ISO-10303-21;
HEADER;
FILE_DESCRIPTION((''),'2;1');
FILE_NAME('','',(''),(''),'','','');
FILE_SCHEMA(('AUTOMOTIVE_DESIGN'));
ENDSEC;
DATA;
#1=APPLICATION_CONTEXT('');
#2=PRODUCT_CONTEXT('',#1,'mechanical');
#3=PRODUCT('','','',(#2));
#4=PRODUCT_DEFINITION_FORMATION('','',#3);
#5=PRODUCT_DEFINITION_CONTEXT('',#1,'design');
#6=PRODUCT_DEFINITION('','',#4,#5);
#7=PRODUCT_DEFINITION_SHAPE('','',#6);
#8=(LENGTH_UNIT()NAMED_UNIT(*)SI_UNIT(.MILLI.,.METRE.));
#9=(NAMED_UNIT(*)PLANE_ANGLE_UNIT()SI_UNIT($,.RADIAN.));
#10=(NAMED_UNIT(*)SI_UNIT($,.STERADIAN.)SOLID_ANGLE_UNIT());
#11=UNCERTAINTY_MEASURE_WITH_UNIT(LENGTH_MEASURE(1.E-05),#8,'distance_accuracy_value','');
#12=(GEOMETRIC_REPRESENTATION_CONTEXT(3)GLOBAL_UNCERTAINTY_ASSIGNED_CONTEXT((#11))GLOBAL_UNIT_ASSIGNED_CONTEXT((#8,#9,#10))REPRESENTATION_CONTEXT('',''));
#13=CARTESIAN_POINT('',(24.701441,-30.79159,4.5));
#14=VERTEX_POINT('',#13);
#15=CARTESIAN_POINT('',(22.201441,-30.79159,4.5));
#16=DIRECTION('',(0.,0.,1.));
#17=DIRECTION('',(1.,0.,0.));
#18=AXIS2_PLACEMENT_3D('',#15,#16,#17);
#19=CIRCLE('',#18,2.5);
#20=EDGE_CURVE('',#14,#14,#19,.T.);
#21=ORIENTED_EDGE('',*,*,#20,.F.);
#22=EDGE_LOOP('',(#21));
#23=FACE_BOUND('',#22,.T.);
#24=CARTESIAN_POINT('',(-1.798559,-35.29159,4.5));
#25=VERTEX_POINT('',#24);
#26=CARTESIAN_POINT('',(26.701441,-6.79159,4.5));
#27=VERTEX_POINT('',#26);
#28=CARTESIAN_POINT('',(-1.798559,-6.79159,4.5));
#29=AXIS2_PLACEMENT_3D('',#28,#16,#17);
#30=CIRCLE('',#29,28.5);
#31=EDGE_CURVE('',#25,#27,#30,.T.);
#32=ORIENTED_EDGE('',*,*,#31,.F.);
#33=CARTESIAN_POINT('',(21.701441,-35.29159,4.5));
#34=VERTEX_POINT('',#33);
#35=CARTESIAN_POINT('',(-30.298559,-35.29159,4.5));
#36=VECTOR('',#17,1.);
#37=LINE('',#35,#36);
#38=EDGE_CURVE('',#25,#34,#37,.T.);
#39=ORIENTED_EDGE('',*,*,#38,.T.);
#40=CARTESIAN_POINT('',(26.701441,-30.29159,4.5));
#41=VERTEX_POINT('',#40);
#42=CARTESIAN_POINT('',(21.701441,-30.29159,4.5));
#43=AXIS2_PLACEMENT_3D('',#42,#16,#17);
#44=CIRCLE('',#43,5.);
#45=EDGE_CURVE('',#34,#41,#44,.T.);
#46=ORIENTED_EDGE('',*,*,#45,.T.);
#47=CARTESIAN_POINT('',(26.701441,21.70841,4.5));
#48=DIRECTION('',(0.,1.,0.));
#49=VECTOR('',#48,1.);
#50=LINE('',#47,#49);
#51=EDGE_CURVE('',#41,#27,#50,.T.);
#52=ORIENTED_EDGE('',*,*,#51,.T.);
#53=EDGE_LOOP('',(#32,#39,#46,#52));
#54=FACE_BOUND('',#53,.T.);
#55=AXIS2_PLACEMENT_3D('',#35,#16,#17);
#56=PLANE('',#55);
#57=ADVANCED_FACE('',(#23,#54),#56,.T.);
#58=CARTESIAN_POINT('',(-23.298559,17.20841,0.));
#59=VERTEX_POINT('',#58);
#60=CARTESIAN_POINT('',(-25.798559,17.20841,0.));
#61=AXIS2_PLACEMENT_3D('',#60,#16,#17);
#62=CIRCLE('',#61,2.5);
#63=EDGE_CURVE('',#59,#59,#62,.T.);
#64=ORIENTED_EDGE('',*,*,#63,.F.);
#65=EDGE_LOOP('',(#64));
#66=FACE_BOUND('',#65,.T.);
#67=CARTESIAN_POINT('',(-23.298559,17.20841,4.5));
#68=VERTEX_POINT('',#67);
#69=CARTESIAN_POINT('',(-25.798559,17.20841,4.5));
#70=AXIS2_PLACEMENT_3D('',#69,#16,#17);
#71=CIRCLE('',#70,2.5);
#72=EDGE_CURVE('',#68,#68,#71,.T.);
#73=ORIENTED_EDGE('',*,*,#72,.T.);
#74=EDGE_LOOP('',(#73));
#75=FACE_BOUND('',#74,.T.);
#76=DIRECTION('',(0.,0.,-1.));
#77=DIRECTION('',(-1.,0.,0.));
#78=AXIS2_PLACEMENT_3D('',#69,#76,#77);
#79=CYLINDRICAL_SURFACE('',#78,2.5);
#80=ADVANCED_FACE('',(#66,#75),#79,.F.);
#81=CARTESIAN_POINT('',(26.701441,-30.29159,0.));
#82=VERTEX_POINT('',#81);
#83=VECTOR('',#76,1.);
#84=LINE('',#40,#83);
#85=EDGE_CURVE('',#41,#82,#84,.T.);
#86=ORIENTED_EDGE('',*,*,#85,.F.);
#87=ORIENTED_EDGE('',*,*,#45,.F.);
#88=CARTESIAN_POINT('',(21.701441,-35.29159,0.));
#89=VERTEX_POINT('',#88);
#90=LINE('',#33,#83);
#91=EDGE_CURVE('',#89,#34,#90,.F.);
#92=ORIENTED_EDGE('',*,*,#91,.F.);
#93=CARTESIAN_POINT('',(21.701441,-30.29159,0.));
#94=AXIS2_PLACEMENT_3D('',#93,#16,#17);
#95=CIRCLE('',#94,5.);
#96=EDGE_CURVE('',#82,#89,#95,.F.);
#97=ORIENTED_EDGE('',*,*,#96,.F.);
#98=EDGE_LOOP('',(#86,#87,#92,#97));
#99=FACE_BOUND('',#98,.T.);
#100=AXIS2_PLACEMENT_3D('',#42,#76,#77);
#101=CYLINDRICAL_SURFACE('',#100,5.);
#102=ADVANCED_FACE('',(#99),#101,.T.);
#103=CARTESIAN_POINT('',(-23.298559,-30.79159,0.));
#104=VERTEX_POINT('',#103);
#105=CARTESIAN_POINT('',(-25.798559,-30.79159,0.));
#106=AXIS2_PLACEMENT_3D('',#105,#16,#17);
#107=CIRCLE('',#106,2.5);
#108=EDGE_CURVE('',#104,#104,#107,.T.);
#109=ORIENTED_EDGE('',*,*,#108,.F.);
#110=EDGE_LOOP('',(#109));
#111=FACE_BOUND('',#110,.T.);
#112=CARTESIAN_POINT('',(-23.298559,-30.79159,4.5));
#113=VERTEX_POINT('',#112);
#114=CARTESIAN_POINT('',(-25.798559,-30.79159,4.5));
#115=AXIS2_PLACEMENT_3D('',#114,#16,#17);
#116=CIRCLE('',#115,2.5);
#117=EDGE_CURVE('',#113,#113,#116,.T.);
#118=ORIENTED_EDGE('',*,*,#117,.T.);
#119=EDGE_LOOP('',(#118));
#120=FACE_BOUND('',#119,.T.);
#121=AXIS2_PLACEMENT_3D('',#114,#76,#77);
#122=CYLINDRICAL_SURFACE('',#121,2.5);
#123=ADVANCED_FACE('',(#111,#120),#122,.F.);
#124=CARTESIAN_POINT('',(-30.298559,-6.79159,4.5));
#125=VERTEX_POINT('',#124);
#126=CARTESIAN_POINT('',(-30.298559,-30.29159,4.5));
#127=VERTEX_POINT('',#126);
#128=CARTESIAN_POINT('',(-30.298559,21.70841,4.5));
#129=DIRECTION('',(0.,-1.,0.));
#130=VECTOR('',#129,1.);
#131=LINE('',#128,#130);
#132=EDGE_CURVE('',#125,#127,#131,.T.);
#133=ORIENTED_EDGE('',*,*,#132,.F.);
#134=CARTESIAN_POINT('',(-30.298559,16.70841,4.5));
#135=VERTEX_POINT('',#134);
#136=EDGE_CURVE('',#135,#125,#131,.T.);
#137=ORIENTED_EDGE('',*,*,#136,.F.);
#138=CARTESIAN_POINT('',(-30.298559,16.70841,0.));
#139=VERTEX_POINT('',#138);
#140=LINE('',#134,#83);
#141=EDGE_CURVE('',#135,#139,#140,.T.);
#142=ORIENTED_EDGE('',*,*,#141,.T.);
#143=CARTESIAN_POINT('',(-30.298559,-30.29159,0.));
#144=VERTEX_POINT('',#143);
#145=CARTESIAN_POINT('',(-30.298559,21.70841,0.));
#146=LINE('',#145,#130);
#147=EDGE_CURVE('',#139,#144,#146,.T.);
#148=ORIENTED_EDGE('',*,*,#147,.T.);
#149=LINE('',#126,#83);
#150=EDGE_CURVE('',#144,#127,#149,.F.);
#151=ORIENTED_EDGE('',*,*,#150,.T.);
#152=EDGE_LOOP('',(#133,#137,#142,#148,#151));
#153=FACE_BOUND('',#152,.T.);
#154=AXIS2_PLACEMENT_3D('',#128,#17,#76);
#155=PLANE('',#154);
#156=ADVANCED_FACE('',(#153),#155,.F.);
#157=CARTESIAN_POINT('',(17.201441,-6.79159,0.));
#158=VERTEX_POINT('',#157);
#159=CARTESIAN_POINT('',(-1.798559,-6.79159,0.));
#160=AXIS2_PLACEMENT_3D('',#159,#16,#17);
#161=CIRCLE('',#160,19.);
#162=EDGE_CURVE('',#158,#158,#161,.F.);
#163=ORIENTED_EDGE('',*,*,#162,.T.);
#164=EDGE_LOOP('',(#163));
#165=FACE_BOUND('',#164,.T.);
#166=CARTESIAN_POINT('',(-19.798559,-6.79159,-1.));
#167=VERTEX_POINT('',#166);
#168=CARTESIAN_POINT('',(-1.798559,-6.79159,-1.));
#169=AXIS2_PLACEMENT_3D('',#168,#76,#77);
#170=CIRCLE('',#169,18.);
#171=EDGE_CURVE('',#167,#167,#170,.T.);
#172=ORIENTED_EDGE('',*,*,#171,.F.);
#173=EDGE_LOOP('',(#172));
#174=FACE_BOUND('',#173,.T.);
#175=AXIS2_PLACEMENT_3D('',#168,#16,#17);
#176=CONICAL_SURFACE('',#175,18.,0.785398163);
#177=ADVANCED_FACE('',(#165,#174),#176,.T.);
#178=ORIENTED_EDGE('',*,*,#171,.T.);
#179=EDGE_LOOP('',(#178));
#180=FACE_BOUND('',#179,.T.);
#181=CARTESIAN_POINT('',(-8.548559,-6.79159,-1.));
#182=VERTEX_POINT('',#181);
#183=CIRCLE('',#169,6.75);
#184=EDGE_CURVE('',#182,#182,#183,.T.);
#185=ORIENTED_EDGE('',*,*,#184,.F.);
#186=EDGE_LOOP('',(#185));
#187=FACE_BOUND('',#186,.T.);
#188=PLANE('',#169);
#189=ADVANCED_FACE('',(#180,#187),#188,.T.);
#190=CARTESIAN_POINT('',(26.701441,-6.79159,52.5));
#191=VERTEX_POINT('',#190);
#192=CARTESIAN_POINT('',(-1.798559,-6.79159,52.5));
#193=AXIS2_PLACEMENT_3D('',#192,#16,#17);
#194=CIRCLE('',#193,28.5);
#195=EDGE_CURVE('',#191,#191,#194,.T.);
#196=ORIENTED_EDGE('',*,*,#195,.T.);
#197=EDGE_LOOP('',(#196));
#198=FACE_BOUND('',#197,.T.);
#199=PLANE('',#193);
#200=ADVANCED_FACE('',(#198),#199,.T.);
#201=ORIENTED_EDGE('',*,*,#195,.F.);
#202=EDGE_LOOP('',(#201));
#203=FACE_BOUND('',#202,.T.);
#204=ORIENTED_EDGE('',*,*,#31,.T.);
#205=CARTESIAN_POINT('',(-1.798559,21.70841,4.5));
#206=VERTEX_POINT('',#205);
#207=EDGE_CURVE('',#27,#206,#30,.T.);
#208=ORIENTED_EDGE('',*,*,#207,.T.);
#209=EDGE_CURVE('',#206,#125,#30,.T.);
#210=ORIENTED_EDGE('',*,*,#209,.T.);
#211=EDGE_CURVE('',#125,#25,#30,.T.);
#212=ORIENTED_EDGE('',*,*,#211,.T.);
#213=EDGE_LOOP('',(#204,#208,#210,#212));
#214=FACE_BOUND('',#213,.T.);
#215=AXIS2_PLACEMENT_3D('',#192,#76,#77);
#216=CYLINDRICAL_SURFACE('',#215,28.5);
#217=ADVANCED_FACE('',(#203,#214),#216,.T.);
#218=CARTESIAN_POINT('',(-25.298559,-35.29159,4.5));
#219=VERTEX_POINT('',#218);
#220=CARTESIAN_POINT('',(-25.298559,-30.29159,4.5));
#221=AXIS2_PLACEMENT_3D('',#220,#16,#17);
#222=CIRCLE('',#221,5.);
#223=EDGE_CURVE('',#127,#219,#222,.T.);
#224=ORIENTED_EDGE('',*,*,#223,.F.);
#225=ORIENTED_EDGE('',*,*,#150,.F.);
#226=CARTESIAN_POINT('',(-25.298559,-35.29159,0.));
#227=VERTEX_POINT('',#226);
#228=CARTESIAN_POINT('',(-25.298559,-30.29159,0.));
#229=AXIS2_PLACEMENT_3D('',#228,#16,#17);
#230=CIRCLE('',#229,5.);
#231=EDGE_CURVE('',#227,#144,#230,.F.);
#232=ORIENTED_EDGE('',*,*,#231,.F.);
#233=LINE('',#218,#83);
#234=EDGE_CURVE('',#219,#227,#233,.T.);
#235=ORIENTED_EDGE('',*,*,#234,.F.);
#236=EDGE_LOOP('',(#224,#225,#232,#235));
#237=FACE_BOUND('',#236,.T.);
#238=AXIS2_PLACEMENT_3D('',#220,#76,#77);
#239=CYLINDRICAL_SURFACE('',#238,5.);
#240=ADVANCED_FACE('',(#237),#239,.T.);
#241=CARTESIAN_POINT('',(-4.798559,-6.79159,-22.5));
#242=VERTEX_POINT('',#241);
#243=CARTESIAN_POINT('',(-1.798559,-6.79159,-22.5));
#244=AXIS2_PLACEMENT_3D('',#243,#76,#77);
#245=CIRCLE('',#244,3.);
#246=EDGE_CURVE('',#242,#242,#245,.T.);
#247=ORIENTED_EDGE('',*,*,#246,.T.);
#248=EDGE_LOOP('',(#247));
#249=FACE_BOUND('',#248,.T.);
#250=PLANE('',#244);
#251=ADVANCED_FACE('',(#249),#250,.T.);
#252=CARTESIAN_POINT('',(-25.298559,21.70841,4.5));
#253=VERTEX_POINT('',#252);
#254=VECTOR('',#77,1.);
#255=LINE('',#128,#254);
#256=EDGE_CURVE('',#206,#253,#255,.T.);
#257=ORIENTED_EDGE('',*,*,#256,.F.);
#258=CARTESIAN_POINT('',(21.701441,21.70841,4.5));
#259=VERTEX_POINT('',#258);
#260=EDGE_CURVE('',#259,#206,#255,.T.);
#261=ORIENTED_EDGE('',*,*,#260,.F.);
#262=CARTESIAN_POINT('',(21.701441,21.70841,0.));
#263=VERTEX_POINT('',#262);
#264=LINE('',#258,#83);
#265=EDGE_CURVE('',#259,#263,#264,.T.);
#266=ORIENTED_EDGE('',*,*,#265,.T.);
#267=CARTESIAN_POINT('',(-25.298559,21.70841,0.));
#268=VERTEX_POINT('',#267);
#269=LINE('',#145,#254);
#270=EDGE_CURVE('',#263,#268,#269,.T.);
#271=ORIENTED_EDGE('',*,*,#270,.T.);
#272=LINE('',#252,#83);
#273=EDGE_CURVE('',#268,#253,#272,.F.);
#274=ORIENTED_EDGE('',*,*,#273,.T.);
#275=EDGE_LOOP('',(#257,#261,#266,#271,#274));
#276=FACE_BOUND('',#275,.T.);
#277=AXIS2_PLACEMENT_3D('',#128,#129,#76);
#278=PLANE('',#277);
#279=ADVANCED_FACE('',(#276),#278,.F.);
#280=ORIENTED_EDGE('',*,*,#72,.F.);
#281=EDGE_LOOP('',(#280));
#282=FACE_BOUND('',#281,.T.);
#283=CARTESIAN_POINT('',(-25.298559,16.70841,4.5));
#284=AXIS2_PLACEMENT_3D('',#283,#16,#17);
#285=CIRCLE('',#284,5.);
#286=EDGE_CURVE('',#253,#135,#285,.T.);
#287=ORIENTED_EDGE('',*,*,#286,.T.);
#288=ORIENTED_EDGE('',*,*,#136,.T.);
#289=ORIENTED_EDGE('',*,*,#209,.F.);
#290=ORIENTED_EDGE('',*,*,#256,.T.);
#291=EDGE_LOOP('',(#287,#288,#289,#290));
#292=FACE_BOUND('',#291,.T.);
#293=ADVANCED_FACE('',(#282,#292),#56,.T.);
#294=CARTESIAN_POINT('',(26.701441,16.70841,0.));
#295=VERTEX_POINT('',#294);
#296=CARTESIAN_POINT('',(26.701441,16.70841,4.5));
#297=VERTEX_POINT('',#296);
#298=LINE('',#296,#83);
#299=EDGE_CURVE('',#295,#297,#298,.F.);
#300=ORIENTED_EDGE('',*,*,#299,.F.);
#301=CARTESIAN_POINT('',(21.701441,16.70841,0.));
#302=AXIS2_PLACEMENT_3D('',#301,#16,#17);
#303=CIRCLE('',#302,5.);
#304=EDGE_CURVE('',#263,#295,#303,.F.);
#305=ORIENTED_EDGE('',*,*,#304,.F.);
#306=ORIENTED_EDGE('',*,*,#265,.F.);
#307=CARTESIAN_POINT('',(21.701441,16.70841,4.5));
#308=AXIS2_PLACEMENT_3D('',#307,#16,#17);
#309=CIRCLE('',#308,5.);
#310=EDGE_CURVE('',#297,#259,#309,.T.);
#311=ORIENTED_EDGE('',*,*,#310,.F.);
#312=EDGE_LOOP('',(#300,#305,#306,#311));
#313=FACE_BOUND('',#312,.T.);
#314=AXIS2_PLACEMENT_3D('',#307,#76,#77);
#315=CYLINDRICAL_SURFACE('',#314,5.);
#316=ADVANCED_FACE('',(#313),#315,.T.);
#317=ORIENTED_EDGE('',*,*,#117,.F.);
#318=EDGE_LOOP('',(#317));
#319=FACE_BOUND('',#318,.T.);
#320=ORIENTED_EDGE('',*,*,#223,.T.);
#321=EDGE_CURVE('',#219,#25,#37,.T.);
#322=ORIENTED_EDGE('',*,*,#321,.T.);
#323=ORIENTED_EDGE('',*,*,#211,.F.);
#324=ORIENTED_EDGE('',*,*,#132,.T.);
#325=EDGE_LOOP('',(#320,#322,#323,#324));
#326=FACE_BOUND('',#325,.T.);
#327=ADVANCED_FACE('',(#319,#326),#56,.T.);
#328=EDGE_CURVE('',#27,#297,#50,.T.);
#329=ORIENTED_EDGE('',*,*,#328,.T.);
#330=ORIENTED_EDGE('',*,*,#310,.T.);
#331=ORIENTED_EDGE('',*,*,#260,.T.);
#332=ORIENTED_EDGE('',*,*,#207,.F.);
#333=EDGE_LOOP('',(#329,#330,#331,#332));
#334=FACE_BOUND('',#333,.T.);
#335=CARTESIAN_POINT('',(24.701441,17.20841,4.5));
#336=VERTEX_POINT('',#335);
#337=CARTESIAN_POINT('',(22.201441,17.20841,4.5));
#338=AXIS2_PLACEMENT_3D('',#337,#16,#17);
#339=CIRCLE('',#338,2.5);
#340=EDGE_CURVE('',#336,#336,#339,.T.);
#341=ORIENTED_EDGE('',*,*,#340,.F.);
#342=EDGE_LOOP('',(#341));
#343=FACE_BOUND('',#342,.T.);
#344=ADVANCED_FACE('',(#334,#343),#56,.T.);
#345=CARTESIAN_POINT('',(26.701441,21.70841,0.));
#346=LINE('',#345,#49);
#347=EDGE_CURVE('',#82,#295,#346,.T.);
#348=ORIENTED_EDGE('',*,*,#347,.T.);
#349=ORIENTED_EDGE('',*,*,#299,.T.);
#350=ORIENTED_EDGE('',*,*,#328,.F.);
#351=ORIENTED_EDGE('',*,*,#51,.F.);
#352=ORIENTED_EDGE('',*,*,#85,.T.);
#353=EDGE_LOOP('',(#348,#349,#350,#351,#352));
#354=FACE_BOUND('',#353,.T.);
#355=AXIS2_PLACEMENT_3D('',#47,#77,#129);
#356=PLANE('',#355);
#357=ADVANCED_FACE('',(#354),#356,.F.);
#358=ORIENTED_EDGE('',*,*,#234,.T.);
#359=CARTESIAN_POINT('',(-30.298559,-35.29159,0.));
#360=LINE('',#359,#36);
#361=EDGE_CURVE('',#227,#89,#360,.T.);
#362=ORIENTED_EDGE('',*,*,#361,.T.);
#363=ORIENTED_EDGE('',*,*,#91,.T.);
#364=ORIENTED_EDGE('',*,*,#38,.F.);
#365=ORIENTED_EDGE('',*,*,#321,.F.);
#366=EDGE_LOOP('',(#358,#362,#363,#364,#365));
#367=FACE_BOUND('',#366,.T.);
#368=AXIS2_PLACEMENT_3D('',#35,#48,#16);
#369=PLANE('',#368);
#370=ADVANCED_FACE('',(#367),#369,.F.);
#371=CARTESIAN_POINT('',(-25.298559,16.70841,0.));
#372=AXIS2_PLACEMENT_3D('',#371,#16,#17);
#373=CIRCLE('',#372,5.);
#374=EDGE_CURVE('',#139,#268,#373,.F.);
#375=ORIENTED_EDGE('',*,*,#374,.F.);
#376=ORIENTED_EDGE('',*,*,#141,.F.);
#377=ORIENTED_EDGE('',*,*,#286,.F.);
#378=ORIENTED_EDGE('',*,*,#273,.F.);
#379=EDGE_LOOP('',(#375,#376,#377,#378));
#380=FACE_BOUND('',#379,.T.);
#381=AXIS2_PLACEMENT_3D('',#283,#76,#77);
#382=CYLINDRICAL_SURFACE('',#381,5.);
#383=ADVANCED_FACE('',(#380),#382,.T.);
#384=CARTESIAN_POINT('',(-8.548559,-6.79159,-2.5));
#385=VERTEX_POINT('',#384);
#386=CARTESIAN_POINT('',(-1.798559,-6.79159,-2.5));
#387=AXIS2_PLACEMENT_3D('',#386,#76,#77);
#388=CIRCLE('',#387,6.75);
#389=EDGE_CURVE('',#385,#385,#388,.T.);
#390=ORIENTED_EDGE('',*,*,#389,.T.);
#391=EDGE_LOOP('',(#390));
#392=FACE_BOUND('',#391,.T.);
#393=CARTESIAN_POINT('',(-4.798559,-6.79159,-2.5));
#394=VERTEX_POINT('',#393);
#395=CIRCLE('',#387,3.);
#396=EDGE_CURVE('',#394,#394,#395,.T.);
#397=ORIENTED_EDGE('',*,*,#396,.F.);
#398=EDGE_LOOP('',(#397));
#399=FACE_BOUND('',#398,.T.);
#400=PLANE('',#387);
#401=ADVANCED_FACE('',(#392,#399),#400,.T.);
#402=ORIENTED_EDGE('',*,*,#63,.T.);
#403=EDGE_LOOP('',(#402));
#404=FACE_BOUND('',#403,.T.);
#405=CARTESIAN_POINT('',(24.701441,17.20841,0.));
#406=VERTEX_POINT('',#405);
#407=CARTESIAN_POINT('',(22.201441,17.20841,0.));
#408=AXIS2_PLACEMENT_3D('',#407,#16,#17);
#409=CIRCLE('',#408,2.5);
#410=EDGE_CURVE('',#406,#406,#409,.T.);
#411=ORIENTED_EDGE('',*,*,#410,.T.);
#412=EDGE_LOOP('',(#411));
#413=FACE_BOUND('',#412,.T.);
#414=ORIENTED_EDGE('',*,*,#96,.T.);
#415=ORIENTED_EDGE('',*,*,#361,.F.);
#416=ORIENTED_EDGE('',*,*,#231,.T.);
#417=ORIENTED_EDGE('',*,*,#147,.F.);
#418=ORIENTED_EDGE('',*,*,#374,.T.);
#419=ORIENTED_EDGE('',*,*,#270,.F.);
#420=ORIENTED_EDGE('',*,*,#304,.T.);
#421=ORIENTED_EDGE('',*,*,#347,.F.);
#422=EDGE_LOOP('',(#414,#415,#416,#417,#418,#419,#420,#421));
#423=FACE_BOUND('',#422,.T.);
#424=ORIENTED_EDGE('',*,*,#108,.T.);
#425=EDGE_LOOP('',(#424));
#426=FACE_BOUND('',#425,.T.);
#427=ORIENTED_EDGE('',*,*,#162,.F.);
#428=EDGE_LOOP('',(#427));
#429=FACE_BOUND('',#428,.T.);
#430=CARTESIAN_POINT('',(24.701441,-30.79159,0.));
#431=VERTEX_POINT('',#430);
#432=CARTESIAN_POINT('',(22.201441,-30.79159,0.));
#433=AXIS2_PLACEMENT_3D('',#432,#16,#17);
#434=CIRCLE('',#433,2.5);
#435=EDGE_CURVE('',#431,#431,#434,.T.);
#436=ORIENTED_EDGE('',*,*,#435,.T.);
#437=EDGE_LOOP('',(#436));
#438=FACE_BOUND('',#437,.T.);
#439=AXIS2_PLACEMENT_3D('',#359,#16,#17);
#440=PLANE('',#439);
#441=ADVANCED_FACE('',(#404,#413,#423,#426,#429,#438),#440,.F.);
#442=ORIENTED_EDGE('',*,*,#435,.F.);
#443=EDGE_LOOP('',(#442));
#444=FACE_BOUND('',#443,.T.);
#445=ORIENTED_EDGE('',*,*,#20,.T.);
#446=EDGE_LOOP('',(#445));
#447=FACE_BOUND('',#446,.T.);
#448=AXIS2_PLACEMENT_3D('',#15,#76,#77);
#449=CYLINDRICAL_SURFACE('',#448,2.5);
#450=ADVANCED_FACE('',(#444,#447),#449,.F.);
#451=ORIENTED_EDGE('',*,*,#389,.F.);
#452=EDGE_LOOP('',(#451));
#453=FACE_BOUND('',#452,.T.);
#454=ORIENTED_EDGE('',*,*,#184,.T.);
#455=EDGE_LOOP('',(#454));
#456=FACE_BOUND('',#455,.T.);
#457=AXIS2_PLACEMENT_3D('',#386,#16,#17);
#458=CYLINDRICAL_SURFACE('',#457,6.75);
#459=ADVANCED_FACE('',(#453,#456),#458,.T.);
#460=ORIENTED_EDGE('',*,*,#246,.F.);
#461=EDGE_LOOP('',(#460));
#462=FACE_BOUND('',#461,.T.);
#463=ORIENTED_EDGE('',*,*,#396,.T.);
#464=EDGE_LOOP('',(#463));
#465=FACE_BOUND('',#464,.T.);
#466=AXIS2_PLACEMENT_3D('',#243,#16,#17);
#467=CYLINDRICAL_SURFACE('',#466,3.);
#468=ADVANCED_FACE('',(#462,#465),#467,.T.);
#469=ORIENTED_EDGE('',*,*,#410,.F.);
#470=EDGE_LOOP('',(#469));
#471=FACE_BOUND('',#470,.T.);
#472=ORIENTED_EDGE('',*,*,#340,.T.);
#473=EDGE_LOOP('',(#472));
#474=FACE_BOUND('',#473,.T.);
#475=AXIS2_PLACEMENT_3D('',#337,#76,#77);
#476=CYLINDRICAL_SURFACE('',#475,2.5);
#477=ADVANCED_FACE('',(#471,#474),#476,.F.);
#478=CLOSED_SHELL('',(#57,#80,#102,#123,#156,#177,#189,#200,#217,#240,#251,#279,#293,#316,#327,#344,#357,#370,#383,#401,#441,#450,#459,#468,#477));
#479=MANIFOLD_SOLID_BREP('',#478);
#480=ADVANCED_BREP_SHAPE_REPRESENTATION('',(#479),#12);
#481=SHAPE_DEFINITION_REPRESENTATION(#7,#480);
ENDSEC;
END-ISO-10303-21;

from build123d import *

# Parameters (mm, degrees)
ESQUISSE1_W        = 57
ESQUISSE1_H        = 57
ESQUISSE1_R        = 2.5
BOSS_EXTRU_1_DEPTH = 4.5
CONG_2_R           = 5
ESQUISSE2_R        = 19
BOSS_EXTRU_2_DEPTH = 1
CHANFREIN1_SIZE    = 1
ESQUISSE3_R        = 28.5
BOSS_EXTRU_3_DEPTH = 48
ESQUISSE4_R        = 6.75
BOSS_EXTRU_4_DEPTH = 1.5
ESQUISSE5_R        = 3
BOSS_EXTRU_5_DEPTH = 20


with BuildPart() as part:
    # Esquisse1 → Boss.-Extru.1 (new body)
    with BuildSketch(Plane.XY):
        with Locations((-1.798558634, -6.791590494)):
            Rectangle(ESQUISSE1_W, ESQUISSE1_H)
        with Locations((-25.798558634, 17.208409506)):
            Circle(ESQUISSE1_R, mode=Mode.SUBTRACT)
        with Locations((22.201441366, 17.208409506)):
            Circle(ESQUISSE1_R, mode=Mode.SUBTRACT)
        with Locations((22.201441366, -30.791590494)):
            Circle(ESQUISSE1_R, mode=Mode.SUBTRACT)
        with Locations((-25.798558634, -30.791590494)):
            Circle(ESQUISSE1_R, mode=Mode.SUBTRACT)
    extrude(amount=BOSS_EXTRU_1_DEPTH)

    # Congé2
    cong_2_edges = [part.edges().sort_by_distance(p)[0] for p in [
        (-30.298558634, 21.708409506, 2.25),
        (26.701441366, 21.708409506, 2.25),
        (26.701441366, -35.291590494, 2.25),
        (-30.298558634, -35.291590494, 2.25),
    ]]
    fillet(cong_2_edges, radius=CONG_2_R)

    # Esquisse2 → Boss.-Extru.2 (add)
    with BuildSketch(Plane(origin=(0, 0, 0), x_dir=(-1, 0, 0), z_dir=(0, 0, -1))):
        with Locations(Location((1.798558634, -6.791590494, 0), (0, 0, 180))):
            Circle(ESQUISSE2_R)
    extrude(amount=BOSS_EXTRU_2_DEPTH)

    # Chanfrein1
    chanfrein1_edges = [part.edges().sort_by_distance(p)[0] for p in [
        (-20.798558634, -6.791590494, -1),
    ]]
    chamfer(chanfrein1_edges, length=CHANFREIN1_SIZE - 0.0001)  # a hair under: the kernel refuses the full size

    # Esquisse3 → Boss.-Extru.3 (add)
    with BuildSketch(Plane.XY.offset(4.5)):
        with Locations((-1.798558634, -6.791590494)):
            Circle(ESQUISSE3_R)
    extrude(amount=BOSS_EXTRU_3_DEPTH)

    # Esquisse4 → Boss.-Extru.4 (add)
    with BuildSketch(Plane(origin=(0, 0, -1), x_dir=(-1, 0, 0), z_dir=(0, 0, -1))):
        with Locations((1.798558634, -6.791590494)):
            Circle(ESQUISSE4_R)
    extrude(amount=BOSS_EXTRU_4_DEPTH)

    # Esquisse5 → Boss.-Extru.5 (add)
    with BuildSketch(Plane(origin=(0, 0, -2.5), x_dir=(-1, 0, 0), z_dir=(0, 0, -1))):
        with Locations((1.798558634, -6.791590494)):
            Circle(ESQUISSE5_R)
    extrude(amount=BOSS_EXTRU_5_DEPTH)


solid = part.part
